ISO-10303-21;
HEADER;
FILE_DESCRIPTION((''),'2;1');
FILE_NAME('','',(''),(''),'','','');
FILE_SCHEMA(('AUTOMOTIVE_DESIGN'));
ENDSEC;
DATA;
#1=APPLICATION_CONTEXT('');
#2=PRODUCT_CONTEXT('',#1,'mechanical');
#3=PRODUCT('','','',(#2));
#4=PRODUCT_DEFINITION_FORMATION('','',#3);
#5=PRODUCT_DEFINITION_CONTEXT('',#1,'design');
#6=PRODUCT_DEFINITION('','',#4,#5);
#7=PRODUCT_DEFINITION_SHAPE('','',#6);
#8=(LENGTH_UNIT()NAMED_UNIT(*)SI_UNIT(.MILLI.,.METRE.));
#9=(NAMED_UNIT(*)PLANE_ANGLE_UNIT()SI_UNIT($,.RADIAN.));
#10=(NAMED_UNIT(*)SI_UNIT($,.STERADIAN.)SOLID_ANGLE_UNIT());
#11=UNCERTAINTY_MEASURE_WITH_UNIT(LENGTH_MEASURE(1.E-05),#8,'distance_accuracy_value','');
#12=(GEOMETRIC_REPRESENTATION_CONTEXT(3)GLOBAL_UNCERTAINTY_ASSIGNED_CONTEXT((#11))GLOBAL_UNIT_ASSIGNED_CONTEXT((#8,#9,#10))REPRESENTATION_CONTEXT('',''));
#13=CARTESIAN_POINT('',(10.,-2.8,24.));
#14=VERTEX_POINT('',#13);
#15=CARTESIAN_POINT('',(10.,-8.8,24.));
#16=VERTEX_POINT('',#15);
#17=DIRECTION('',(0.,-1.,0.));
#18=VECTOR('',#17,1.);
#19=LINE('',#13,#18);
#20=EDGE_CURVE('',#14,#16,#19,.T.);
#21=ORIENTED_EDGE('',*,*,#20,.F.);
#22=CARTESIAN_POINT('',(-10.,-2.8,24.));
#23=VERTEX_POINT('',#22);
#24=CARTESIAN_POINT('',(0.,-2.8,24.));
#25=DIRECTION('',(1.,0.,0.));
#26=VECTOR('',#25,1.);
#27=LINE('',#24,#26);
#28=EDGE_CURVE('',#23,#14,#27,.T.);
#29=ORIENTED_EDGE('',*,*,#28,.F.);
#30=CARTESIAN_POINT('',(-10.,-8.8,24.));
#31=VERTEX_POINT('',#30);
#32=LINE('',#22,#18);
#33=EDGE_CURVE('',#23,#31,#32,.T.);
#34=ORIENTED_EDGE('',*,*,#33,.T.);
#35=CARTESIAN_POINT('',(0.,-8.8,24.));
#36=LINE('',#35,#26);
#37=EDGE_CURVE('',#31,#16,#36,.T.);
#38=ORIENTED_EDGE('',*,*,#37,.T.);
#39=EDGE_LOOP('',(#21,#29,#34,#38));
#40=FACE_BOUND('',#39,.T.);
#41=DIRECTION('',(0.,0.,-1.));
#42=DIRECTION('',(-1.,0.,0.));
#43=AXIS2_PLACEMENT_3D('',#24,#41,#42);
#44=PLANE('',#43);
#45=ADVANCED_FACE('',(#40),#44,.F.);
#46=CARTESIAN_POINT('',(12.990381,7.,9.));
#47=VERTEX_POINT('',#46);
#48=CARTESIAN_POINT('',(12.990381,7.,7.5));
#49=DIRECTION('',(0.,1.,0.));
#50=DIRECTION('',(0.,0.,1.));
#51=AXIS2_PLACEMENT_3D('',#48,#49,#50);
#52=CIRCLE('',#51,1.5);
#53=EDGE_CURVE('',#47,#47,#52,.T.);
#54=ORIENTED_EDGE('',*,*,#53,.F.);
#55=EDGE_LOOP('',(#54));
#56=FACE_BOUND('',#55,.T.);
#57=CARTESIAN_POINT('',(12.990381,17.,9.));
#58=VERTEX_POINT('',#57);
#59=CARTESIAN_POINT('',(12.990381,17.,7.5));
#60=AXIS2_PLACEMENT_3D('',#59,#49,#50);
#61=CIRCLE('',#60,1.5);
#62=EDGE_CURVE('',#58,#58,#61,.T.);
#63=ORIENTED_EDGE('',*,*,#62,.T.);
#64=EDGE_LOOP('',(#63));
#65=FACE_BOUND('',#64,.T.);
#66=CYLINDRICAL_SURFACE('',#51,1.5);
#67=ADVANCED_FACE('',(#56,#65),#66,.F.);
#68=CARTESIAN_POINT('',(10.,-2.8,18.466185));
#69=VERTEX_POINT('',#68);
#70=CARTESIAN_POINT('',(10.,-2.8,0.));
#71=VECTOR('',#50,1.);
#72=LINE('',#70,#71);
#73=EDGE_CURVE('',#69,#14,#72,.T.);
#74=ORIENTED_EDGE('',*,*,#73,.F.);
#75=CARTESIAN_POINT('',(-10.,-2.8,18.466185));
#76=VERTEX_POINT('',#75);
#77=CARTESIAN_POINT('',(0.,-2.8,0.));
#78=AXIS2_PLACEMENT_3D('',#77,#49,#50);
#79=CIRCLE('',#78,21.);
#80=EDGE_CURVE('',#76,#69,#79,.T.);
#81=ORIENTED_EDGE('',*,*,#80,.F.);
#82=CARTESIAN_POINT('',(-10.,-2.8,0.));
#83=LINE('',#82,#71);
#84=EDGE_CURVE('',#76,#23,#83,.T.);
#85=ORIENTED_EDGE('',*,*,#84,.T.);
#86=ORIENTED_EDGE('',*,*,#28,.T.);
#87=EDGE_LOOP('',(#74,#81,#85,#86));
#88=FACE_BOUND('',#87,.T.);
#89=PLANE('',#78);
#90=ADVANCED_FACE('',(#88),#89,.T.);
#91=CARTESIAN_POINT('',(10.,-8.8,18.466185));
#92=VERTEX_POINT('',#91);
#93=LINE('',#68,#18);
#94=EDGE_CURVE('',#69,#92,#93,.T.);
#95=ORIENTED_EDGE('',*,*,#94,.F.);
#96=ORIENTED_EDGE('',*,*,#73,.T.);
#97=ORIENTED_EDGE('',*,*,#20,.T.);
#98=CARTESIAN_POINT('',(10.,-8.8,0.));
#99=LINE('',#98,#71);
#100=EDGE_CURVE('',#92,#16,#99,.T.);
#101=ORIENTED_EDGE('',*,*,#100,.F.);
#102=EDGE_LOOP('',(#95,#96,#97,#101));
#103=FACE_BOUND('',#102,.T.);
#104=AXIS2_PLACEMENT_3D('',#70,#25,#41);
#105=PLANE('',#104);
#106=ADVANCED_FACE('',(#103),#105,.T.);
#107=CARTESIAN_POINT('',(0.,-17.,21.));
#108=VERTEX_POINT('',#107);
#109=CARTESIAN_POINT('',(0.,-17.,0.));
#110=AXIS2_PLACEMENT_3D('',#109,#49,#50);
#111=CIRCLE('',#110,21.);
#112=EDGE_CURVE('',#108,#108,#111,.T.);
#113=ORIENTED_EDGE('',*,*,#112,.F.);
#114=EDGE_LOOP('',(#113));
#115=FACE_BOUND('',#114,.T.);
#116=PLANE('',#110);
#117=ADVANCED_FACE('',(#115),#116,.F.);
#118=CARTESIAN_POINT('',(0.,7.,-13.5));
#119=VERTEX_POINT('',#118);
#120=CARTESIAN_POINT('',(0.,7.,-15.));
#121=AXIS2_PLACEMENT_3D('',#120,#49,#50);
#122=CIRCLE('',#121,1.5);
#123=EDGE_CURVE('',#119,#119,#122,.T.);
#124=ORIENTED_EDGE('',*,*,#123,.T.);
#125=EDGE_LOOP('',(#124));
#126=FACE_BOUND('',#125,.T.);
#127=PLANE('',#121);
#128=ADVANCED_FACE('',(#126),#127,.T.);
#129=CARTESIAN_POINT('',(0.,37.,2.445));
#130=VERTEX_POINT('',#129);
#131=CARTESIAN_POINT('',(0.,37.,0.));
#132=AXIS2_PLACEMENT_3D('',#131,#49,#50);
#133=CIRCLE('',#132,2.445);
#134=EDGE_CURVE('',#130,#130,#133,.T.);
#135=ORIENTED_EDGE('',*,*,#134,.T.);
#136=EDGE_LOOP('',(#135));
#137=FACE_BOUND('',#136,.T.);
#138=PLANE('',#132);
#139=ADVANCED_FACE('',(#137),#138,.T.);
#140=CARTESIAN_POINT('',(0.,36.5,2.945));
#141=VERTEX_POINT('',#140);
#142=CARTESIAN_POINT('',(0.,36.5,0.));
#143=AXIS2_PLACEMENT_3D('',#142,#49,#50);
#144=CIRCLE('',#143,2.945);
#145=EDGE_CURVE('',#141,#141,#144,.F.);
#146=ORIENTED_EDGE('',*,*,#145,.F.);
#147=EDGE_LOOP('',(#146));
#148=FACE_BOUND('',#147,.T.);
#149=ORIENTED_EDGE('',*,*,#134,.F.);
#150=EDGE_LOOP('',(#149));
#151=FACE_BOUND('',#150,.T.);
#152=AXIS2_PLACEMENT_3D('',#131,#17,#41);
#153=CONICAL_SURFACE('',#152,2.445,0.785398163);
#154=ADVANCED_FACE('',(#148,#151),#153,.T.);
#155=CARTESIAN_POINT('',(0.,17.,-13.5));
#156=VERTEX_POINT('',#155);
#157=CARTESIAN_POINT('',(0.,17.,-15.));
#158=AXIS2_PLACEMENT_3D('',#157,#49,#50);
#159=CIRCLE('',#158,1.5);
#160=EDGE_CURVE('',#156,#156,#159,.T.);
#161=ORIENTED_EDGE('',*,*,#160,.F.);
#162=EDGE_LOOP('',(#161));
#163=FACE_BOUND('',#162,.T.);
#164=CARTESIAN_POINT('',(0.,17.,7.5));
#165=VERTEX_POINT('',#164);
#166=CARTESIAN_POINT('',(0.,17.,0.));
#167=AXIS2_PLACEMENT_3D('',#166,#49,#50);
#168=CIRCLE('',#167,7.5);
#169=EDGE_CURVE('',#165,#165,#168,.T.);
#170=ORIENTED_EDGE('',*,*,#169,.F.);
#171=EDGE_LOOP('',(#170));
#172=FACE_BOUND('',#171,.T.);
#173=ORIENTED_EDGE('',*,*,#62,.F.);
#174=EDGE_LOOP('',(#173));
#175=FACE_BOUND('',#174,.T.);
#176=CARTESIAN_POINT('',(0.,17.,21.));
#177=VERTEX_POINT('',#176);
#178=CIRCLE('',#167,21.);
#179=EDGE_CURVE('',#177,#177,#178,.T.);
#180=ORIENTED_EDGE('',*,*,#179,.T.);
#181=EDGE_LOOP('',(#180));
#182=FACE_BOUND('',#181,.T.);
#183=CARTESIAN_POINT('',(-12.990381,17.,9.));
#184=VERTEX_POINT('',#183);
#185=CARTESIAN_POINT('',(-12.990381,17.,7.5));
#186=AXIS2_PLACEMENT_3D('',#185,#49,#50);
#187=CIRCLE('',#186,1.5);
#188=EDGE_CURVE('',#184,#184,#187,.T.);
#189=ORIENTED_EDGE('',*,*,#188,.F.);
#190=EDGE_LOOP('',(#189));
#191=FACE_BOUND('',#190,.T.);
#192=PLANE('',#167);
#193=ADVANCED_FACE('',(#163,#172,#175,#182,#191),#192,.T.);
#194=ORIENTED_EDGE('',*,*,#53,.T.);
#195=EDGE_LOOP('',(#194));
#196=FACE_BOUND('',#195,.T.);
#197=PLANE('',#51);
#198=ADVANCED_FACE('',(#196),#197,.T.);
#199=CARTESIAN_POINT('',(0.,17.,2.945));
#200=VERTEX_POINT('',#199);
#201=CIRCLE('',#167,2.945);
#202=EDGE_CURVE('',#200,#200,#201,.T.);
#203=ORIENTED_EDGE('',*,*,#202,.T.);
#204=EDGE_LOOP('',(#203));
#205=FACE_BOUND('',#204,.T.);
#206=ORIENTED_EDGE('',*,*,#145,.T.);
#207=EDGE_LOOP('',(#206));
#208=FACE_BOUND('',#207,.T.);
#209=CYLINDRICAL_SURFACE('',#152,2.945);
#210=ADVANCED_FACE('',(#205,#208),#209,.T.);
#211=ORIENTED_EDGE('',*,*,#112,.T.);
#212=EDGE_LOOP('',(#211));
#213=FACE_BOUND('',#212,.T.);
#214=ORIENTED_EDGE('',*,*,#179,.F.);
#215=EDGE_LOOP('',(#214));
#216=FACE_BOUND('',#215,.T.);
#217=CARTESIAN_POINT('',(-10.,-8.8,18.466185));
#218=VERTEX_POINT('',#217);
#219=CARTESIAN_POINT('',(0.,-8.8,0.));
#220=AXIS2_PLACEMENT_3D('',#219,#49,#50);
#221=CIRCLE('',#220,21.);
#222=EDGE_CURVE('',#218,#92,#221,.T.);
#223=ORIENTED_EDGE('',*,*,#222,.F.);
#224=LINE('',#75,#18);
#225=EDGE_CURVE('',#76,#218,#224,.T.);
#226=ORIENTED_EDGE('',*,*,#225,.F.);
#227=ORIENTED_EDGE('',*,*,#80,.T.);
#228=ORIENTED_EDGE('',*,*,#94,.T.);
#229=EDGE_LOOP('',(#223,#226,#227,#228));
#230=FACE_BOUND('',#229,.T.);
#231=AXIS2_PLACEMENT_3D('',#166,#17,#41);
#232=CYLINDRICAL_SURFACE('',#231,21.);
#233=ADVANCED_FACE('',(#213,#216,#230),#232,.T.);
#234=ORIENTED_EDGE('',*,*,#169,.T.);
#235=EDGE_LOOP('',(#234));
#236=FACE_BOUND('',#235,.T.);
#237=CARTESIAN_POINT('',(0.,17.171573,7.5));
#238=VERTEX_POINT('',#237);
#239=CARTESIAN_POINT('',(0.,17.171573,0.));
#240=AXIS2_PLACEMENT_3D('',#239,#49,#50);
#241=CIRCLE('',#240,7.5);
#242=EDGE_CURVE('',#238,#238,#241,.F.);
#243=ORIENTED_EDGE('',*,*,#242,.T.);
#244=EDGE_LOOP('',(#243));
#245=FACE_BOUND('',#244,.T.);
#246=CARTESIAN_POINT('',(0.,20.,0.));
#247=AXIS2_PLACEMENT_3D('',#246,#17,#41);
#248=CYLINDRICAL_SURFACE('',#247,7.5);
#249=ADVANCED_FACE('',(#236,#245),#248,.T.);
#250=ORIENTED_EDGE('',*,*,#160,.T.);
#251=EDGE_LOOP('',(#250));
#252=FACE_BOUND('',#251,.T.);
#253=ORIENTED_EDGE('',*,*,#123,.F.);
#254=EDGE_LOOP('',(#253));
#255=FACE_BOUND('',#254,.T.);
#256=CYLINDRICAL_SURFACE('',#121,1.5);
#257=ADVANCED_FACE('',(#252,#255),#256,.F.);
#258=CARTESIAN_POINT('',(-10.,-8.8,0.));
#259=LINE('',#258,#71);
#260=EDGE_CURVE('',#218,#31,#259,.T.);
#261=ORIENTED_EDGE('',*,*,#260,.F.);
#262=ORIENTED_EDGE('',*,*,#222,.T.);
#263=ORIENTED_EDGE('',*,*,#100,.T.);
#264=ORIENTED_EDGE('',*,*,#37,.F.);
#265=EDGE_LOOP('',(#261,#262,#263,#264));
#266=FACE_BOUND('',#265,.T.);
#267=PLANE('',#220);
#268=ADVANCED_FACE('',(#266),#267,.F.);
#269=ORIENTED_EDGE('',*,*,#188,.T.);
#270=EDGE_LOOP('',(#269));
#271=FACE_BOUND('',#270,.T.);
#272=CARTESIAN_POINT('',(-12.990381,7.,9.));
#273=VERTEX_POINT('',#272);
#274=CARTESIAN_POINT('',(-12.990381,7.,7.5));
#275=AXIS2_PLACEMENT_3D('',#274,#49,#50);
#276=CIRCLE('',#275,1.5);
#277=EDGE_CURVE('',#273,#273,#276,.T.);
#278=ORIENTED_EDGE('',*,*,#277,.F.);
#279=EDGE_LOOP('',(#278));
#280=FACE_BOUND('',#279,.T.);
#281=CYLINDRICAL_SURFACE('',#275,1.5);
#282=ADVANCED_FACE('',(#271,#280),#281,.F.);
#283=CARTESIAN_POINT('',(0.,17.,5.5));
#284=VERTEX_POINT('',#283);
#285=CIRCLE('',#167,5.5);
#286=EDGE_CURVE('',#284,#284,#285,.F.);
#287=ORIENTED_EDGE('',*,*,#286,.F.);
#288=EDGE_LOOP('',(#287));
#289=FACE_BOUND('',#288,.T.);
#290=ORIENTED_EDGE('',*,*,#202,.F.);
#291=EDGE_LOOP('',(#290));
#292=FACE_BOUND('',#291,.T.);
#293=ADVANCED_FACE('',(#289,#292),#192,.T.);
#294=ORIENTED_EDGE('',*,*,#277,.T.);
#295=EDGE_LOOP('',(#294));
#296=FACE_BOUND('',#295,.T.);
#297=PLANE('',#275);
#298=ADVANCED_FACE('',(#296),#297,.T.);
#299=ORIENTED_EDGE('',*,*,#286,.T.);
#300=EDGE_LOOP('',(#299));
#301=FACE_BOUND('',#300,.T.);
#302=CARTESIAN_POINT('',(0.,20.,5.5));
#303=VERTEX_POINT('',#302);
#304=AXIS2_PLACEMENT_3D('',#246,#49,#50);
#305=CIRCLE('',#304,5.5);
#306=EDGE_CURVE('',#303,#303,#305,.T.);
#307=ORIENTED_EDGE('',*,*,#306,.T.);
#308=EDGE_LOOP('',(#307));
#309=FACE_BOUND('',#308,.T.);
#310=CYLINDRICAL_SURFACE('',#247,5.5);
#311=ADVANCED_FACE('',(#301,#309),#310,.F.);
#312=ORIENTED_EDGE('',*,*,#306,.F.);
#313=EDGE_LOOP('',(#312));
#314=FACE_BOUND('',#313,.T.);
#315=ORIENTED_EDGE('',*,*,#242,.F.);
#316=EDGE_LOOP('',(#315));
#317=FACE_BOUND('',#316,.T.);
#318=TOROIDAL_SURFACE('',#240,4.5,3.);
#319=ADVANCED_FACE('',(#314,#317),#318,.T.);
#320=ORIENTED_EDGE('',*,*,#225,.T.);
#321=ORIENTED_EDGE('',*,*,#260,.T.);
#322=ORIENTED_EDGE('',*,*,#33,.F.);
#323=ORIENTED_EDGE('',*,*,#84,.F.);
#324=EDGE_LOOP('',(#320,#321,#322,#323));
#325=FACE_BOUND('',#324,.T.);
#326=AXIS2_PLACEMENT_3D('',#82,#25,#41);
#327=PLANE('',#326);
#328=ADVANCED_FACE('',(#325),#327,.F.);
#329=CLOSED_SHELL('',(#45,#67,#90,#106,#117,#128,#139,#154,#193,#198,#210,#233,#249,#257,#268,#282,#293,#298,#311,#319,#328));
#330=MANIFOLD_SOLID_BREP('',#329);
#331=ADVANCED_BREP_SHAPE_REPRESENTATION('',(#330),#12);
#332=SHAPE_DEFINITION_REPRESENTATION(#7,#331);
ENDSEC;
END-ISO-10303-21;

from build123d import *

# Parameters (mm, degrees)
SKETCH1_R           = 21
SKETCH1_R_2         = 1.5
SKETCH1_R_3         = 7.5
SKETCH1_R_4         = 5.5
SKETCH1_R_5         = 2.945
BOSS_EXTRUDE1_DEPTH = 17
CUT_EXTRUDE1_START  = 17
SKETCH1_3_R         = 1.5
CUT_EXTRUDE1_DEPTH  = 10
BOSS_EXTRUDE2_START = 17
SKETCH1_4_R         = 7.5
SKETCH1_4_R_2       = 5.5
BOSS_EXTRUDE2_DEPTH = 3
FILLET1_R           = 3
BOSS_EXTRUDE3_START = 17
SKETCH1_5_R         = 2.945
BOSS_EXTRUDE3_DEPTH = 20
BOSS_EXTRUDE4_START = -2.8
BOSS_EXTRUDE4_DEPTH = 6
CHAMFER1_SIZE       = 0.5


with BuildPart() as part:
    # Sketch1 → Boss-Extrude1 (new, symmetric)
    # profile 1 of 7: a face of its own
    with BuildSketch(Plane(origin=(0, 0, 0), x_dir=(1, 0, 0), z_dir=(0, 1, 0))):
        with Locations(Location((0, 0, 0), (0, 0, 270))):
            Circle(SKETCH1_R)
        with Locations((12.990381057, -7.5)):
            Circle(SKETCH1_R_2, mode=Mode.SUBTRACT)
        with Locations((-12.990381057, -7.5)):
            Circle(SKETCH1_R_2, mode=Mode.SUBTRACT)
        with Locations((0, 15)):
            Circle(SKETCH1_R_2, mode=Mode.SUBTRACT)
        Circle(SKETCH1_R_3, mode=Mode.SUBTRACT)
    # profile 2 of 7: a face of its own
    with BuildSketch(Plane(origin=(0, 0, 0), x_dir=(1, 0, 0), z_dir=(0, 1, 0))):
        Circle(SKETCH1_R_3)
        Circle(SKETCH1_R_4, mode=Mode.SUBTRACT)
    # profile 3 of 7: a face of its own
    with BuildSketch(Plane(origin=(0, 0, 0), x_dir=(1, 0, 0), z_dir=(0, 1, 0))):
        Circle(SKETCH1_R_4)
        Circle(SKETCH1_R_5, mode=Mode.SUBTRACT)
    # profile 4 of 7: a face of its own
    with BuildSketch(Plane(origin=(0, 0, 0), x_dir=(1, 0, 0), z_dir=(0, 1, 0))):
        Circle(SKETCH1_R_5)
    # profile 5 of 7: a face of its own
    with BuildSketch(Plane(origin=(0, 0, 0), x_dir=(1, 0, 0), z_dir=(0, 1, 0))):
        with Locations((-12.990381057, -7.5)):
            Circle(SKETCH1_R_2)
    # profile 6 of 7: a face of its own
    with BuildSketch(Plane(origin=(0, 0, 0), x_dir=(1, 0, 0), z_dir=(0, 1, 0))):
        with Locations((12.990381057, -7.5)):
            Circle(SKETCH1_R_2)
    # profile 7 of 7: a face of its own
    with BuildSketch(Plane(origin=(0, 0, 0), x_dir=(1, 0, 0), z_dir=(0, 1, 0))):
        with Locations((0, 15)):
            Circle(SKETCH1_R_2)
    extrude(amount=BOSS_EXTRUDE1_DEPTH, both=True)

    # Sketch1<3> → Cut-Extrude1 (cut)
    with BuildSketch(Plane(origin=(0, 0, 0), x_dir=(1, 0, 0), z_dir=(0, 1, 0)).offset(CUT_EXTRUDE1_START)):
        with Locations(Location((-12.990381057, -7.5, 0), (0, 0, 270))):
            Circle(SKETCH1_3_R)
        with Locations(Location((12.990381057, -7.5, 0), (0, 0, 270))):
            Circle(SKETCH1_3_R)
        with Locations(Location((0, 15, 0), (0, 0, 270))):
            Circle(SKETCH1_3_R)
    extrude(amount=-CUT_EXTRUDE1_DEPTH, mode=Mode.SUBTRACT)

    # Sketch1<4> → Boss-Extrude2 (add)
    with BuildSketch(Plane(origin=(0, 0, 0), x_dir=(1, 0, 0), z_dir=(0, 1, 0)).offset(BOSS_EXTRUDE2_START)):
        with Locations(Location((0, 0, 0), (0, 0, 270))):
            Circle(SKETCH1_4_R)
        with Locations(Location((0, 0, 0), (0, 0, 270))):
            Circle(SKETCH1_4_R_2, mode=Mode.SUBTRACT)
    extrude(amount=BOSS_EXTRUDE2_DEPTH)

    # Fillet1
    # the kernel refuses this fillet: 3 mm, written as the material it takes off along each edge
    with BuildSketch(Plane(origin=(0, 20, 0), x_dir=(0, 0, 1), z_dir=(-1, 0, 0))) as fillet1_piece_1:
        with BuildLine():
            CenterArc((4.5, -2.828427125), FILLET1_R, 0, 70.528779366)
            Line((5.5, 0), (5.52, 0.056568542))
            ThreePointArc((5.52, 0.056568542), (6.5, 0.06), (7.5, 0.06))
            Line((7.5, 0.06), (7.56, 0))
            Line((7.56, 0), (7.56, -2.828427125))
            Line((7.56, -2.828427125), (7.5, -2.828427125))
        make_face()
    revolve(axis=Axis((0, 20, 0), (0, 1, 0)), mode=Mode.SUBTRACT)

    # Sketch1<5> → Boss-Extrude3 (add)
    with BuildSketch(Plane(origin=(0, 0, 0), x_dir=(1, 0, 0), z_dir=(0, 1, 0)).offset(BOSS_EXTRUDE3_START)):
        with Locations(Location((0, 0, 0), (0, 0, 270))):
            Circle(SKETCH1_5_R)
    extrude(amount=BOSS_EXTRUDE3_DEPTH)

    # Sketch1<8> → Boss-Extrude4 (add)
    with BuildSketch(Plane(origin=(0, 0, 0), x_dir=(1, 0, 0), z_dir=(0, 1, 0)).offset(BOSS_EXTRUDE4_START)):
        with BuildLine():
            ThreePointArc((10, -18.466185313), (0, -21), (-10, -18.466185313))
            Line((-10, -18.466185313), (-10, -24))
            Line((-10, -24), (10, -24))
            Line((10, -24), (10, -18.466185313))
        make_face()
    extrude(amount=-BOSS_EXTRUDE4_DEPTH)

    # Chamfer1
    chamfer1_edges = [part.edges().sort_by_distance(p)[0] for p in [
        (0, 37, -2.945),
    ]]
    chamfer(chamfer1_edges, length=CHAMFER1_SIZE)


solid = part.part
